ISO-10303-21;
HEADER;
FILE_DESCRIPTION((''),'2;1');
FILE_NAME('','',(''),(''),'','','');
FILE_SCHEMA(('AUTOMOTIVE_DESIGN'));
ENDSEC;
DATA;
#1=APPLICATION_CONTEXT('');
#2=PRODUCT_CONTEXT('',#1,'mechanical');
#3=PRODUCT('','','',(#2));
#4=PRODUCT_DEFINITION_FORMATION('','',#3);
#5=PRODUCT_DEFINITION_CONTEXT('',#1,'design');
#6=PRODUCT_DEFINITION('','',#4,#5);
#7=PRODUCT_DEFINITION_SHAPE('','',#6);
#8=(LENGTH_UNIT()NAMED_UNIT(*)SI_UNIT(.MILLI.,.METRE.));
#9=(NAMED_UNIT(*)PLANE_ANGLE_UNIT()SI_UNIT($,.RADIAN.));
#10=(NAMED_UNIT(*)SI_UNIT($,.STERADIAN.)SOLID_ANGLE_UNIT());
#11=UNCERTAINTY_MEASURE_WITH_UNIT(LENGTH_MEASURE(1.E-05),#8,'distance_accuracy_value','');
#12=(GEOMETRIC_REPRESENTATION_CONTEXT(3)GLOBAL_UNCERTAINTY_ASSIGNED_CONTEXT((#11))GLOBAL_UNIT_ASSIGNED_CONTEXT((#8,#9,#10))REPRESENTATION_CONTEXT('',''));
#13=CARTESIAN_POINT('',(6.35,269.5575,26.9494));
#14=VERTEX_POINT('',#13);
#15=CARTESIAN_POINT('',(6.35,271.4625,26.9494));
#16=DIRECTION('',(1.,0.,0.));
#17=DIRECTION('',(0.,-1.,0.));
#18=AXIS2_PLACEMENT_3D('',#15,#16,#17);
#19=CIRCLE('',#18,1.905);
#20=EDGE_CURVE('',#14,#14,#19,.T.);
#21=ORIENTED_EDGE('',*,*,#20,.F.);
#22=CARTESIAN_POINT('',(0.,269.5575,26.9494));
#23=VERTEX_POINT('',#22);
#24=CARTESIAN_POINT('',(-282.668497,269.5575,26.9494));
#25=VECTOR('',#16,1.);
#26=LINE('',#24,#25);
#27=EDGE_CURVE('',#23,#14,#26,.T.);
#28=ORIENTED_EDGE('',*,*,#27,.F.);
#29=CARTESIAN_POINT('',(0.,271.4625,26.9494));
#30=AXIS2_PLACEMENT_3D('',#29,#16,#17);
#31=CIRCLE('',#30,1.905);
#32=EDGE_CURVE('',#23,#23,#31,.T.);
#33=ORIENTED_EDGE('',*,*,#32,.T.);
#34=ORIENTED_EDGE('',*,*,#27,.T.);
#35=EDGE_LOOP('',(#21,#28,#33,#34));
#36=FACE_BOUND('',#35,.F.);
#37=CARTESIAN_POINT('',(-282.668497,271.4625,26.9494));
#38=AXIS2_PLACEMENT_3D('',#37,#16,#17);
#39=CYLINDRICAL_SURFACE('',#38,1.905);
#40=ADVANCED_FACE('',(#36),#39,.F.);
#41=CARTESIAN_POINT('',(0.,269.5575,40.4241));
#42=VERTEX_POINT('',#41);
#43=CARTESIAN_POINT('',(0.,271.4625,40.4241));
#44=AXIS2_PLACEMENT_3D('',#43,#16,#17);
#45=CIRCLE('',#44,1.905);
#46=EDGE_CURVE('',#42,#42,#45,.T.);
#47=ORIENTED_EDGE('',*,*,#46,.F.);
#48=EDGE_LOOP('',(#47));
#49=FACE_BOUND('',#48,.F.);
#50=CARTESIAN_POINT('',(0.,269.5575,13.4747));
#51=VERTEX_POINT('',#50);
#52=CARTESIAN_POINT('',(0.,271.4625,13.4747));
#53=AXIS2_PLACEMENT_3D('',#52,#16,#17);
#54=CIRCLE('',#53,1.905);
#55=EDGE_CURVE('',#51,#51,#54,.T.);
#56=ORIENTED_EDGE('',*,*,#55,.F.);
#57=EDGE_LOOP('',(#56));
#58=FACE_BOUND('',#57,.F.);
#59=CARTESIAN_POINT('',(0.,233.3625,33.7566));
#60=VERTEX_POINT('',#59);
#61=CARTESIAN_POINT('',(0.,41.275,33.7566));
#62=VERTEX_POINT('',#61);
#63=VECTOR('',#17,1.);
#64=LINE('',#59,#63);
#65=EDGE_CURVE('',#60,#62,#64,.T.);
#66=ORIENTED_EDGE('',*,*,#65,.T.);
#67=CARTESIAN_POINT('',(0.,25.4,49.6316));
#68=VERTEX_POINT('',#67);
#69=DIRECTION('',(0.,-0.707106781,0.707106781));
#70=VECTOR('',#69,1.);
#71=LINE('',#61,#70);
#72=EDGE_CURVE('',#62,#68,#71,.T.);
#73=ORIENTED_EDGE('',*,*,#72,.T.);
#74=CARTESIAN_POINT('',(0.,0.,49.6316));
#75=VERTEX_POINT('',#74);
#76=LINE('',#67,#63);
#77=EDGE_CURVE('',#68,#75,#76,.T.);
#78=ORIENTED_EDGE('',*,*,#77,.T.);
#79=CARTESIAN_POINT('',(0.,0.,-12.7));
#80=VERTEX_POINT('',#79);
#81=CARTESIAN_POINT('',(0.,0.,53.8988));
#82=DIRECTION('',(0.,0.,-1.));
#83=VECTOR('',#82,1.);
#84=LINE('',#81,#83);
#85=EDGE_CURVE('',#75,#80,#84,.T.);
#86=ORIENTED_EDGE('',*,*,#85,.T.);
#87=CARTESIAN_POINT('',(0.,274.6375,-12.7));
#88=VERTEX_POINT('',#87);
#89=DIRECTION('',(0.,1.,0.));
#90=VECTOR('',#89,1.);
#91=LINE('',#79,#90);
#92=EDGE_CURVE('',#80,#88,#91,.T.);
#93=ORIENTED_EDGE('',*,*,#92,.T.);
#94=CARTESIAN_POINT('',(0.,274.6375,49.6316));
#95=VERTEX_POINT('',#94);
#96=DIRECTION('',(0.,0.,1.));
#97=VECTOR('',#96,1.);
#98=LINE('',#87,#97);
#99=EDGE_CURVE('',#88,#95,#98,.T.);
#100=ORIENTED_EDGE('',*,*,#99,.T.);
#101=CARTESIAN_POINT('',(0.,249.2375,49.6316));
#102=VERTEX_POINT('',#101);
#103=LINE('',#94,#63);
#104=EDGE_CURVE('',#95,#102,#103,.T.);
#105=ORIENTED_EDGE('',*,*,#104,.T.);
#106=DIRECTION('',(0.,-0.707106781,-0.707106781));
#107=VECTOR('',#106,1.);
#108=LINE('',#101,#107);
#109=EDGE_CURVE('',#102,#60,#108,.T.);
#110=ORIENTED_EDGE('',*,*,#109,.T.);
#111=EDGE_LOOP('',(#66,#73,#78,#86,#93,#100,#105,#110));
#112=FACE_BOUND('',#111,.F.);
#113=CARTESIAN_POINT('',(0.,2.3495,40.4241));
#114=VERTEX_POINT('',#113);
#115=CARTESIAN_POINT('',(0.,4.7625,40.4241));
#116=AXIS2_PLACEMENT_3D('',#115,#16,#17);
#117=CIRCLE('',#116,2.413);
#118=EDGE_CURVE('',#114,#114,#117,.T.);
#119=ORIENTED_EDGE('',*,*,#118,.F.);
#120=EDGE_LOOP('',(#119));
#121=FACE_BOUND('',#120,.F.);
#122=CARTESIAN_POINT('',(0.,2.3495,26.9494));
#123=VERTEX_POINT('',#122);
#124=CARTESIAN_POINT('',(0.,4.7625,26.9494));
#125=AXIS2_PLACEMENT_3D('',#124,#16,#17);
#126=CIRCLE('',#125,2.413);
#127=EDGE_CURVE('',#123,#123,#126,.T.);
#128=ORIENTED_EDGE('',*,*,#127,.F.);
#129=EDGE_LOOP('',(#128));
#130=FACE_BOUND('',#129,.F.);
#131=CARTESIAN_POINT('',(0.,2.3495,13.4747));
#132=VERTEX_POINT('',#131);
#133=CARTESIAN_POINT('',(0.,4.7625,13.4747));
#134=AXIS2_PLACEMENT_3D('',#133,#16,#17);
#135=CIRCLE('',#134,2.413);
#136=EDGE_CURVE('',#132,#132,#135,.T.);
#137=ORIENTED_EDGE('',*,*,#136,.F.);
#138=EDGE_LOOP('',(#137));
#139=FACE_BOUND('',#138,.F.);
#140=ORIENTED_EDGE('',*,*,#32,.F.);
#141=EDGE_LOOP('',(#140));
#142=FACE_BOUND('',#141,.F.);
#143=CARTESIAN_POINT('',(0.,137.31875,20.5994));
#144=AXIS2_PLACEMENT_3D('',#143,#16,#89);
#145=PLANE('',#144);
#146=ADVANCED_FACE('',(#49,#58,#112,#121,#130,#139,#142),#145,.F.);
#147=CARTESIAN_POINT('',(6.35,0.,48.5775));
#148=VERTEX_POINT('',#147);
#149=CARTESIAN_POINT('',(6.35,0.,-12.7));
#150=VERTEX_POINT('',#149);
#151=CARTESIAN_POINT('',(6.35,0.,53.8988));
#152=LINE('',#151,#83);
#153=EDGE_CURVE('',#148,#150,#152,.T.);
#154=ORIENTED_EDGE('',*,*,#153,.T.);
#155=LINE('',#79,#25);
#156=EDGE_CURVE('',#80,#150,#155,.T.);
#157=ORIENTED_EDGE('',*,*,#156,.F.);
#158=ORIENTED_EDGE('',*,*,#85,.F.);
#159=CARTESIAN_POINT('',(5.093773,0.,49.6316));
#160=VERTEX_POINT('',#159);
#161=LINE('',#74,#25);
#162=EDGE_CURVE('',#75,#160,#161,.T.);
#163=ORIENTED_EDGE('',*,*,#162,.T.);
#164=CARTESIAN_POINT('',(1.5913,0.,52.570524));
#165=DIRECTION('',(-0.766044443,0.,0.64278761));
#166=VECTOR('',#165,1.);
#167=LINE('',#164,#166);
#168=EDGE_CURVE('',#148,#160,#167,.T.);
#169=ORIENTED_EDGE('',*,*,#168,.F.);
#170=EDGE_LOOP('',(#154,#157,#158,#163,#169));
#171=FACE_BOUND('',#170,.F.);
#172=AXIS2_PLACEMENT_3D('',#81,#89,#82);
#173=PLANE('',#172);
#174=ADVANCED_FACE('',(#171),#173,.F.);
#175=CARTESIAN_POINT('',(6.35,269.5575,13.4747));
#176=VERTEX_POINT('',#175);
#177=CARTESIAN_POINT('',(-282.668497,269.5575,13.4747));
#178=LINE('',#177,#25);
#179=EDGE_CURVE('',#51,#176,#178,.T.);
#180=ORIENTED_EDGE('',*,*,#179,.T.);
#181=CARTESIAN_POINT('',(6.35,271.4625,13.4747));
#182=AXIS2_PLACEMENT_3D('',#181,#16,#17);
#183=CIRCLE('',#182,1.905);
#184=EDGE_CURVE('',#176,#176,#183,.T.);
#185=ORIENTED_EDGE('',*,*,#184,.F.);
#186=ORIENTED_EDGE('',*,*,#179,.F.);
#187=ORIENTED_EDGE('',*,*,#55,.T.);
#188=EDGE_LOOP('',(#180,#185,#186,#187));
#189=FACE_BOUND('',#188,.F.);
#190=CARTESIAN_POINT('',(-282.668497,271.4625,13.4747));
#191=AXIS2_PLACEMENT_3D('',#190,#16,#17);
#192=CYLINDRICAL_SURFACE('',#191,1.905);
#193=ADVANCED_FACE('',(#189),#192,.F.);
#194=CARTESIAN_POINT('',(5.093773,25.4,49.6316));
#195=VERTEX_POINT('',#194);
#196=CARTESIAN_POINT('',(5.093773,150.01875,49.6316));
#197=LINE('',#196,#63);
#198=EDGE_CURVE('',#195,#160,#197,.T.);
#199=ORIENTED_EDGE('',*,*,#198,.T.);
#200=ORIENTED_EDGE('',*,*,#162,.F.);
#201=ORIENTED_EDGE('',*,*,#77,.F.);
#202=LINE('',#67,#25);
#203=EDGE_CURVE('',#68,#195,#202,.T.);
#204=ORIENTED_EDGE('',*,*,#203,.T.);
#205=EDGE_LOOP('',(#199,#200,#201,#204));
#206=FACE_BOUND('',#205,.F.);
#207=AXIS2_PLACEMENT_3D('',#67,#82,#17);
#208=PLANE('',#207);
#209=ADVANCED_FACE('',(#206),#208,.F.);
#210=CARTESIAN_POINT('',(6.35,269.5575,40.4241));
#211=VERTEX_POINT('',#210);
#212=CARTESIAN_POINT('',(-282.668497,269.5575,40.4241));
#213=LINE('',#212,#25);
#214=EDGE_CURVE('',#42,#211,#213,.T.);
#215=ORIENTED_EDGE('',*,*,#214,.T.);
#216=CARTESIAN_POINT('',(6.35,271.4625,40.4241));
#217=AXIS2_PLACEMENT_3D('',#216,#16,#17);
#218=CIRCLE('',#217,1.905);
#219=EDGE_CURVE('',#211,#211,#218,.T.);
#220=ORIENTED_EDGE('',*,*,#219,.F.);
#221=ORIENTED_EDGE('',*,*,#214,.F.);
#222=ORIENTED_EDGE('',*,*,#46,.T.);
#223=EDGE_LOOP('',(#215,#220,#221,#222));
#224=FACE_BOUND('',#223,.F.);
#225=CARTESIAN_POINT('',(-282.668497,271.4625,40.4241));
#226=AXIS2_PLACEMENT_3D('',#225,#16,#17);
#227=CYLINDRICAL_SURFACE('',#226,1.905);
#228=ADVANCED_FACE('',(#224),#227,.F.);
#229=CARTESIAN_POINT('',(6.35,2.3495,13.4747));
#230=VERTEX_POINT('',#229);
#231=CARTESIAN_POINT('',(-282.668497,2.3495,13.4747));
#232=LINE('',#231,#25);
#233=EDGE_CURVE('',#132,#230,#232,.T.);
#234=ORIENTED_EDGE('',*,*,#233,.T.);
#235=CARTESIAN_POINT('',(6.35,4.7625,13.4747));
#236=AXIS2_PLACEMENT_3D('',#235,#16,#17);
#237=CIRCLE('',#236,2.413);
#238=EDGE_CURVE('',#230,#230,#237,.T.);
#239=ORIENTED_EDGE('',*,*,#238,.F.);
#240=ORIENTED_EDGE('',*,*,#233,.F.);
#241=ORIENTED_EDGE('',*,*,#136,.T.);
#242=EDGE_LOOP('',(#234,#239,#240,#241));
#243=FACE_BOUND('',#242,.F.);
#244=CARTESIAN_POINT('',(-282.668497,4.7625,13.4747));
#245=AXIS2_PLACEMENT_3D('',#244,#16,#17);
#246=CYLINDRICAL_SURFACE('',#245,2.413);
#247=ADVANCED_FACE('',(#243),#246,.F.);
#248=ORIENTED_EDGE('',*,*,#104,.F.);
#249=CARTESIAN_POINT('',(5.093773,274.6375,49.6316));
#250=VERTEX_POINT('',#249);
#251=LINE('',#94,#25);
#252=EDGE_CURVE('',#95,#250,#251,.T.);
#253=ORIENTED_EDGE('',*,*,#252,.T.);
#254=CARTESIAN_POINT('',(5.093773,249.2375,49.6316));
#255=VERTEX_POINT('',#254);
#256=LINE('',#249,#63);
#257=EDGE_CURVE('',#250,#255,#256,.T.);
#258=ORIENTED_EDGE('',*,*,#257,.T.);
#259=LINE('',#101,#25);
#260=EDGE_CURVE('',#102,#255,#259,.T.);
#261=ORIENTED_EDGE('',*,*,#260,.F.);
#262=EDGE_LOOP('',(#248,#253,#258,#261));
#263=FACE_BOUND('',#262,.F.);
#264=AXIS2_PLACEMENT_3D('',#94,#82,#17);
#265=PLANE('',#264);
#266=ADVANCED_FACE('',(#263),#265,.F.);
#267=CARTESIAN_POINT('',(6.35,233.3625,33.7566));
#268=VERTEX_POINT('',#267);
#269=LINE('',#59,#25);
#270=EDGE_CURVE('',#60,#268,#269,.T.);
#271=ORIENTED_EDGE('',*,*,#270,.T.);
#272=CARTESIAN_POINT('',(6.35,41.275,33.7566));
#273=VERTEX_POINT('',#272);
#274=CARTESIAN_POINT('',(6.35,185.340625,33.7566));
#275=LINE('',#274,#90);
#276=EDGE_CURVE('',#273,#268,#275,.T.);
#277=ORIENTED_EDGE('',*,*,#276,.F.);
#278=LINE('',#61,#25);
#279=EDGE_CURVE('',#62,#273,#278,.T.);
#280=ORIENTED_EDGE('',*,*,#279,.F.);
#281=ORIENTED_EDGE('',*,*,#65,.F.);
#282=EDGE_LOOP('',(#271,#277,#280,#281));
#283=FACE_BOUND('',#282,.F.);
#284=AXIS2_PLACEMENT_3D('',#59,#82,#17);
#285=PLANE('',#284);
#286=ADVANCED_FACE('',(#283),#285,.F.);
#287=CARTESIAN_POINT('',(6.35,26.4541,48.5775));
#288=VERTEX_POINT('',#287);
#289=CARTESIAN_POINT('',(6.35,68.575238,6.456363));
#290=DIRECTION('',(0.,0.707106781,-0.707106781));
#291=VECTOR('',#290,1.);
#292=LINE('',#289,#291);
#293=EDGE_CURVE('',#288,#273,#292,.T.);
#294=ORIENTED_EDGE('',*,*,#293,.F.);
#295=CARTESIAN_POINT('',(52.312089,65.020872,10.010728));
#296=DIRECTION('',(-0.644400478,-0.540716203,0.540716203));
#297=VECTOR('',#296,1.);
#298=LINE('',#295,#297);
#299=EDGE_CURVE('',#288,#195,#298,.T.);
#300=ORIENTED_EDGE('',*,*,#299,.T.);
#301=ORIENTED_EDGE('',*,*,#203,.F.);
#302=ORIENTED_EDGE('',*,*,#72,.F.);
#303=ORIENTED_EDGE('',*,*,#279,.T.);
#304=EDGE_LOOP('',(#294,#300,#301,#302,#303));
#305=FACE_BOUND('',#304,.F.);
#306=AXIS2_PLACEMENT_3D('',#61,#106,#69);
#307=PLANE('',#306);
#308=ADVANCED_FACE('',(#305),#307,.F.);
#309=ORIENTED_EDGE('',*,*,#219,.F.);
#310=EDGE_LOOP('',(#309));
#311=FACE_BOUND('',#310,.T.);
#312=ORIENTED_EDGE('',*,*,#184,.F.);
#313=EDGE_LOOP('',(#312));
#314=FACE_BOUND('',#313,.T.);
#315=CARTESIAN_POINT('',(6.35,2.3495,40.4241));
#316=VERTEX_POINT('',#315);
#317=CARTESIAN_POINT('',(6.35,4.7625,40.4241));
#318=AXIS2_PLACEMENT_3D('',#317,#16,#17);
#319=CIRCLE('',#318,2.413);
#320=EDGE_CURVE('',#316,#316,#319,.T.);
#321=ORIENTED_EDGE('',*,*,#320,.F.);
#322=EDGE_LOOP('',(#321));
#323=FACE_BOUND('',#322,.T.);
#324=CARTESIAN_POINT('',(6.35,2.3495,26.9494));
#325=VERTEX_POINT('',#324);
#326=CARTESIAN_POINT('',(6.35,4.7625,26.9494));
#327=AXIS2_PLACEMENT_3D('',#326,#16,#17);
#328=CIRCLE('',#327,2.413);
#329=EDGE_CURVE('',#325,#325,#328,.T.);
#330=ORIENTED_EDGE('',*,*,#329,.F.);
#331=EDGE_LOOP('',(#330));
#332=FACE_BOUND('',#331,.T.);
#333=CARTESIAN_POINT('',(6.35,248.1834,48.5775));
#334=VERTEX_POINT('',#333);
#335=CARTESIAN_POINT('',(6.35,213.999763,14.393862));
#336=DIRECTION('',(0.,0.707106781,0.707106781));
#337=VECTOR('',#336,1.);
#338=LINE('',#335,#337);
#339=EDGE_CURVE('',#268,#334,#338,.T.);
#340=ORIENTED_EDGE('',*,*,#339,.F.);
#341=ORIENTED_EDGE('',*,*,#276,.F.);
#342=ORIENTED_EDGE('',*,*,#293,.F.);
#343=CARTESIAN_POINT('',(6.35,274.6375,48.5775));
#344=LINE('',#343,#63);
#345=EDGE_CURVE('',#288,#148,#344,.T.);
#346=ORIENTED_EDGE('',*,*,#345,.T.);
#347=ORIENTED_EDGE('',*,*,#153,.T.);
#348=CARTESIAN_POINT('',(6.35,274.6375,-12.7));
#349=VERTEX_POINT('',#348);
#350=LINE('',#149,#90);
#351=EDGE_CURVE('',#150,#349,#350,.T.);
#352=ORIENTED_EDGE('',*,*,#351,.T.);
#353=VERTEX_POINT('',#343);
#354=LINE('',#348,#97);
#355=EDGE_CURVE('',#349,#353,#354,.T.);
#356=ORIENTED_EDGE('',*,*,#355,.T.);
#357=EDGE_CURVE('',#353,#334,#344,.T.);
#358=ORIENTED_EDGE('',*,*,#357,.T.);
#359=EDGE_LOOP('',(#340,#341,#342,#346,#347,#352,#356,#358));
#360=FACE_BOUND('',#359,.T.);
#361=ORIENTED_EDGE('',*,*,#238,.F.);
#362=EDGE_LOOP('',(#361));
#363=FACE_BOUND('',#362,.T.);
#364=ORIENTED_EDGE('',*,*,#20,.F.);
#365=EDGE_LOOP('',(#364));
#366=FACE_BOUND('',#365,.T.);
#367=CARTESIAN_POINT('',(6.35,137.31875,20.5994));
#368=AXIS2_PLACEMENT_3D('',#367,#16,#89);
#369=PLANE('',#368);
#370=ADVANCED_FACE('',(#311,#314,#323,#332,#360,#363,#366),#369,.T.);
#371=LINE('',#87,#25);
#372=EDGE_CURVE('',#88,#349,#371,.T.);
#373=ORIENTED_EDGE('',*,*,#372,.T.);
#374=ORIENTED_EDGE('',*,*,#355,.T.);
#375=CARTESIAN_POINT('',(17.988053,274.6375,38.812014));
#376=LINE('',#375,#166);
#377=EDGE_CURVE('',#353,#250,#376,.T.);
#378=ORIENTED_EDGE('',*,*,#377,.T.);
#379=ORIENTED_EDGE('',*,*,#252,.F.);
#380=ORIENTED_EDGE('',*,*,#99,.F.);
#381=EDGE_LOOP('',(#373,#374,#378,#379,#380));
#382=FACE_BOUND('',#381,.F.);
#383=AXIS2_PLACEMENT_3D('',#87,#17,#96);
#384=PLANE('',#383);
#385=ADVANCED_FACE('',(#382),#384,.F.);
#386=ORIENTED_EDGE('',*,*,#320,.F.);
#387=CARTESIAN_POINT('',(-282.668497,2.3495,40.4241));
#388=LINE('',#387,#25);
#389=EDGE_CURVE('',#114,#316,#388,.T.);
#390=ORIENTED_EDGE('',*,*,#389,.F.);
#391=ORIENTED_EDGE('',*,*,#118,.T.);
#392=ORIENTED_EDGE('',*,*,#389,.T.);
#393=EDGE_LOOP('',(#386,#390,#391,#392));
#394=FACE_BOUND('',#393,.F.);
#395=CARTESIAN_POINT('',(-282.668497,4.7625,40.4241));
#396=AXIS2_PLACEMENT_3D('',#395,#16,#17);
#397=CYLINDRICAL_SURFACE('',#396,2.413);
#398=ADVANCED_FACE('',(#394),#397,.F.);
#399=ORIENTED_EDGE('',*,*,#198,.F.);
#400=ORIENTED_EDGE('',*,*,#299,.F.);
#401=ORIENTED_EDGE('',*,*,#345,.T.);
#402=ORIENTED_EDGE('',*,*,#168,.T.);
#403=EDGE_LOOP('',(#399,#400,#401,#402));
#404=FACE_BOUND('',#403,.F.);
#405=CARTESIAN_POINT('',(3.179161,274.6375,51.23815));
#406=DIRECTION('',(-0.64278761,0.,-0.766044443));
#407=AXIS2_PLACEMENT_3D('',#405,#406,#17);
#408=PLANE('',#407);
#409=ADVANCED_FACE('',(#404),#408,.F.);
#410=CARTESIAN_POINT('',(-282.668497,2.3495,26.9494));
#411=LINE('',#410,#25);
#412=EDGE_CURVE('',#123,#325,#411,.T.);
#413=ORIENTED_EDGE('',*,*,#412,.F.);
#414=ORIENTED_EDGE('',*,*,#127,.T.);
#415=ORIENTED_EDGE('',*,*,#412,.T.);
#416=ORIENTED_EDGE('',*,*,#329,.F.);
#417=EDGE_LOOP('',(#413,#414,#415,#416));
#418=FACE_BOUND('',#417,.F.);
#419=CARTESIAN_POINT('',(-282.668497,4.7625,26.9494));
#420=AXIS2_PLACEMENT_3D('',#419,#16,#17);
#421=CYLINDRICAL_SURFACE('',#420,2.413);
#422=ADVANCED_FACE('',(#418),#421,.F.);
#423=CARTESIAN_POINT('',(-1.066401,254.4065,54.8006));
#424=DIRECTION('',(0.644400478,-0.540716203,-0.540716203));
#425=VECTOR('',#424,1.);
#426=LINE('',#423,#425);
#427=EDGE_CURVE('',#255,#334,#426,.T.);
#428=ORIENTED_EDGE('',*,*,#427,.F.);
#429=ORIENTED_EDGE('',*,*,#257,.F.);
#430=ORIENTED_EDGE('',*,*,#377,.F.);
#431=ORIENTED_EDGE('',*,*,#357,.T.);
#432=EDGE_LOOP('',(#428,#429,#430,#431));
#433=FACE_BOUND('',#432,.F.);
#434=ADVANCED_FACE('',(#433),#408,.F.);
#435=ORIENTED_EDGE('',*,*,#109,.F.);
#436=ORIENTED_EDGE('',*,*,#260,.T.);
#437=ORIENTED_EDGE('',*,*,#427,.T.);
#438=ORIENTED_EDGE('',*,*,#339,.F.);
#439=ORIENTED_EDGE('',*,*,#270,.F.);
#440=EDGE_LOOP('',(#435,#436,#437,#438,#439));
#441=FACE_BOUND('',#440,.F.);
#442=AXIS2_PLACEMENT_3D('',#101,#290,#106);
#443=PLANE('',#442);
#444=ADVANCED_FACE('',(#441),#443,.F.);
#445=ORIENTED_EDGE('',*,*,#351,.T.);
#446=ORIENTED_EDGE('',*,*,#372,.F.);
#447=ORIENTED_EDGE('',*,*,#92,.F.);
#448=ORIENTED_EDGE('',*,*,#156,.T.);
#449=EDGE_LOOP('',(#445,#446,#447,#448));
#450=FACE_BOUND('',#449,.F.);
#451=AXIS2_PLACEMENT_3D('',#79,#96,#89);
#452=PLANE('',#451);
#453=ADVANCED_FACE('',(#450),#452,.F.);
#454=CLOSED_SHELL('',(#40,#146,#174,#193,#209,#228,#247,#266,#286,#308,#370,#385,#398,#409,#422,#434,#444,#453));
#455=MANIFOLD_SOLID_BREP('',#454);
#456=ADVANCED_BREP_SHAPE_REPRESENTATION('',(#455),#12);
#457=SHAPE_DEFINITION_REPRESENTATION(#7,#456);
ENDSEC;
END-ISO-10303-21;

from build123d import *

# Parameters (mm, degrees)
F1_DEPTH = 6.35
F2_D     = 4.826
F3_D     = 3.81
F4_SIZE2 = 6.3416783923
F4_SIZE  = 5.3213
F6_DEPTH = 25.4


# Not quite as in the source:
# - a feature names something its author has since deleted; it is built from what else it names


with BuildPart() as f1:
    # F0 (on Right) → F1 (new body)
    with BuildSketch(Plane.YZ):
        Polygon((274.6375, -12.7), (274.6375, 0), (274.6375, 53.8988), (0, 53.8988), (0, 0), (0, -12.7), align=None)
    extrude(amount=F1_DEPTH)

    # F2 (through all)
    with Locations(Plane(origin=(0, 0, 0), x_dir=(0, 1, 0), z_dir=(-1, 0, 0))):
        with Locations((4.7625, -40.4241), (4.7625, -26.9494), (4.7625, -13.4747)):
            Hole(F2_D / 2)

    # F3 (through all)
    with Locations(Plane(origin=(0, 0, 0), x_dir=(0, 1, 0), z_dir=(-1, 0, 0))):
        with Locations((271.4625, -40.4241), (271.4625, -26.9494), (271.4625, -13.4747)):
            Hole(F3_D / 2)

    # F4
    f4_edges = [f1.edges().sort_by_distance(p)[0] for p in [
        (6.35, 137.31875, 53.8988),
    ]]
    f4_side = f1.faces().sort_by_distance((6.35, 137.466328, 20.568323))[0]
    chamfer(f4_edges, length=F4_SIZE, length2=F4_SIZE2, reference=f4_side)

    # F5 (on face) → F6 (cut)
    with BuildSketch(Plane(origin=(0, 0, 0), x_dir=(0, -1, 0), z_dir=(-1, 0, 0))):
        Polygon((-274.6375, 53.8988), (-274.6375, 49.6316), (-249.2375, 49.6316), (-233.3625, 33.7566), (-41.275, 33.7566), (-25.4, 49.6316), (0, 49.6316), (0, 53.8988), align=None)
    extrude(amount=-F6_DEPTH, mode=Mode.SUBTRACT)


solid = f1.part
